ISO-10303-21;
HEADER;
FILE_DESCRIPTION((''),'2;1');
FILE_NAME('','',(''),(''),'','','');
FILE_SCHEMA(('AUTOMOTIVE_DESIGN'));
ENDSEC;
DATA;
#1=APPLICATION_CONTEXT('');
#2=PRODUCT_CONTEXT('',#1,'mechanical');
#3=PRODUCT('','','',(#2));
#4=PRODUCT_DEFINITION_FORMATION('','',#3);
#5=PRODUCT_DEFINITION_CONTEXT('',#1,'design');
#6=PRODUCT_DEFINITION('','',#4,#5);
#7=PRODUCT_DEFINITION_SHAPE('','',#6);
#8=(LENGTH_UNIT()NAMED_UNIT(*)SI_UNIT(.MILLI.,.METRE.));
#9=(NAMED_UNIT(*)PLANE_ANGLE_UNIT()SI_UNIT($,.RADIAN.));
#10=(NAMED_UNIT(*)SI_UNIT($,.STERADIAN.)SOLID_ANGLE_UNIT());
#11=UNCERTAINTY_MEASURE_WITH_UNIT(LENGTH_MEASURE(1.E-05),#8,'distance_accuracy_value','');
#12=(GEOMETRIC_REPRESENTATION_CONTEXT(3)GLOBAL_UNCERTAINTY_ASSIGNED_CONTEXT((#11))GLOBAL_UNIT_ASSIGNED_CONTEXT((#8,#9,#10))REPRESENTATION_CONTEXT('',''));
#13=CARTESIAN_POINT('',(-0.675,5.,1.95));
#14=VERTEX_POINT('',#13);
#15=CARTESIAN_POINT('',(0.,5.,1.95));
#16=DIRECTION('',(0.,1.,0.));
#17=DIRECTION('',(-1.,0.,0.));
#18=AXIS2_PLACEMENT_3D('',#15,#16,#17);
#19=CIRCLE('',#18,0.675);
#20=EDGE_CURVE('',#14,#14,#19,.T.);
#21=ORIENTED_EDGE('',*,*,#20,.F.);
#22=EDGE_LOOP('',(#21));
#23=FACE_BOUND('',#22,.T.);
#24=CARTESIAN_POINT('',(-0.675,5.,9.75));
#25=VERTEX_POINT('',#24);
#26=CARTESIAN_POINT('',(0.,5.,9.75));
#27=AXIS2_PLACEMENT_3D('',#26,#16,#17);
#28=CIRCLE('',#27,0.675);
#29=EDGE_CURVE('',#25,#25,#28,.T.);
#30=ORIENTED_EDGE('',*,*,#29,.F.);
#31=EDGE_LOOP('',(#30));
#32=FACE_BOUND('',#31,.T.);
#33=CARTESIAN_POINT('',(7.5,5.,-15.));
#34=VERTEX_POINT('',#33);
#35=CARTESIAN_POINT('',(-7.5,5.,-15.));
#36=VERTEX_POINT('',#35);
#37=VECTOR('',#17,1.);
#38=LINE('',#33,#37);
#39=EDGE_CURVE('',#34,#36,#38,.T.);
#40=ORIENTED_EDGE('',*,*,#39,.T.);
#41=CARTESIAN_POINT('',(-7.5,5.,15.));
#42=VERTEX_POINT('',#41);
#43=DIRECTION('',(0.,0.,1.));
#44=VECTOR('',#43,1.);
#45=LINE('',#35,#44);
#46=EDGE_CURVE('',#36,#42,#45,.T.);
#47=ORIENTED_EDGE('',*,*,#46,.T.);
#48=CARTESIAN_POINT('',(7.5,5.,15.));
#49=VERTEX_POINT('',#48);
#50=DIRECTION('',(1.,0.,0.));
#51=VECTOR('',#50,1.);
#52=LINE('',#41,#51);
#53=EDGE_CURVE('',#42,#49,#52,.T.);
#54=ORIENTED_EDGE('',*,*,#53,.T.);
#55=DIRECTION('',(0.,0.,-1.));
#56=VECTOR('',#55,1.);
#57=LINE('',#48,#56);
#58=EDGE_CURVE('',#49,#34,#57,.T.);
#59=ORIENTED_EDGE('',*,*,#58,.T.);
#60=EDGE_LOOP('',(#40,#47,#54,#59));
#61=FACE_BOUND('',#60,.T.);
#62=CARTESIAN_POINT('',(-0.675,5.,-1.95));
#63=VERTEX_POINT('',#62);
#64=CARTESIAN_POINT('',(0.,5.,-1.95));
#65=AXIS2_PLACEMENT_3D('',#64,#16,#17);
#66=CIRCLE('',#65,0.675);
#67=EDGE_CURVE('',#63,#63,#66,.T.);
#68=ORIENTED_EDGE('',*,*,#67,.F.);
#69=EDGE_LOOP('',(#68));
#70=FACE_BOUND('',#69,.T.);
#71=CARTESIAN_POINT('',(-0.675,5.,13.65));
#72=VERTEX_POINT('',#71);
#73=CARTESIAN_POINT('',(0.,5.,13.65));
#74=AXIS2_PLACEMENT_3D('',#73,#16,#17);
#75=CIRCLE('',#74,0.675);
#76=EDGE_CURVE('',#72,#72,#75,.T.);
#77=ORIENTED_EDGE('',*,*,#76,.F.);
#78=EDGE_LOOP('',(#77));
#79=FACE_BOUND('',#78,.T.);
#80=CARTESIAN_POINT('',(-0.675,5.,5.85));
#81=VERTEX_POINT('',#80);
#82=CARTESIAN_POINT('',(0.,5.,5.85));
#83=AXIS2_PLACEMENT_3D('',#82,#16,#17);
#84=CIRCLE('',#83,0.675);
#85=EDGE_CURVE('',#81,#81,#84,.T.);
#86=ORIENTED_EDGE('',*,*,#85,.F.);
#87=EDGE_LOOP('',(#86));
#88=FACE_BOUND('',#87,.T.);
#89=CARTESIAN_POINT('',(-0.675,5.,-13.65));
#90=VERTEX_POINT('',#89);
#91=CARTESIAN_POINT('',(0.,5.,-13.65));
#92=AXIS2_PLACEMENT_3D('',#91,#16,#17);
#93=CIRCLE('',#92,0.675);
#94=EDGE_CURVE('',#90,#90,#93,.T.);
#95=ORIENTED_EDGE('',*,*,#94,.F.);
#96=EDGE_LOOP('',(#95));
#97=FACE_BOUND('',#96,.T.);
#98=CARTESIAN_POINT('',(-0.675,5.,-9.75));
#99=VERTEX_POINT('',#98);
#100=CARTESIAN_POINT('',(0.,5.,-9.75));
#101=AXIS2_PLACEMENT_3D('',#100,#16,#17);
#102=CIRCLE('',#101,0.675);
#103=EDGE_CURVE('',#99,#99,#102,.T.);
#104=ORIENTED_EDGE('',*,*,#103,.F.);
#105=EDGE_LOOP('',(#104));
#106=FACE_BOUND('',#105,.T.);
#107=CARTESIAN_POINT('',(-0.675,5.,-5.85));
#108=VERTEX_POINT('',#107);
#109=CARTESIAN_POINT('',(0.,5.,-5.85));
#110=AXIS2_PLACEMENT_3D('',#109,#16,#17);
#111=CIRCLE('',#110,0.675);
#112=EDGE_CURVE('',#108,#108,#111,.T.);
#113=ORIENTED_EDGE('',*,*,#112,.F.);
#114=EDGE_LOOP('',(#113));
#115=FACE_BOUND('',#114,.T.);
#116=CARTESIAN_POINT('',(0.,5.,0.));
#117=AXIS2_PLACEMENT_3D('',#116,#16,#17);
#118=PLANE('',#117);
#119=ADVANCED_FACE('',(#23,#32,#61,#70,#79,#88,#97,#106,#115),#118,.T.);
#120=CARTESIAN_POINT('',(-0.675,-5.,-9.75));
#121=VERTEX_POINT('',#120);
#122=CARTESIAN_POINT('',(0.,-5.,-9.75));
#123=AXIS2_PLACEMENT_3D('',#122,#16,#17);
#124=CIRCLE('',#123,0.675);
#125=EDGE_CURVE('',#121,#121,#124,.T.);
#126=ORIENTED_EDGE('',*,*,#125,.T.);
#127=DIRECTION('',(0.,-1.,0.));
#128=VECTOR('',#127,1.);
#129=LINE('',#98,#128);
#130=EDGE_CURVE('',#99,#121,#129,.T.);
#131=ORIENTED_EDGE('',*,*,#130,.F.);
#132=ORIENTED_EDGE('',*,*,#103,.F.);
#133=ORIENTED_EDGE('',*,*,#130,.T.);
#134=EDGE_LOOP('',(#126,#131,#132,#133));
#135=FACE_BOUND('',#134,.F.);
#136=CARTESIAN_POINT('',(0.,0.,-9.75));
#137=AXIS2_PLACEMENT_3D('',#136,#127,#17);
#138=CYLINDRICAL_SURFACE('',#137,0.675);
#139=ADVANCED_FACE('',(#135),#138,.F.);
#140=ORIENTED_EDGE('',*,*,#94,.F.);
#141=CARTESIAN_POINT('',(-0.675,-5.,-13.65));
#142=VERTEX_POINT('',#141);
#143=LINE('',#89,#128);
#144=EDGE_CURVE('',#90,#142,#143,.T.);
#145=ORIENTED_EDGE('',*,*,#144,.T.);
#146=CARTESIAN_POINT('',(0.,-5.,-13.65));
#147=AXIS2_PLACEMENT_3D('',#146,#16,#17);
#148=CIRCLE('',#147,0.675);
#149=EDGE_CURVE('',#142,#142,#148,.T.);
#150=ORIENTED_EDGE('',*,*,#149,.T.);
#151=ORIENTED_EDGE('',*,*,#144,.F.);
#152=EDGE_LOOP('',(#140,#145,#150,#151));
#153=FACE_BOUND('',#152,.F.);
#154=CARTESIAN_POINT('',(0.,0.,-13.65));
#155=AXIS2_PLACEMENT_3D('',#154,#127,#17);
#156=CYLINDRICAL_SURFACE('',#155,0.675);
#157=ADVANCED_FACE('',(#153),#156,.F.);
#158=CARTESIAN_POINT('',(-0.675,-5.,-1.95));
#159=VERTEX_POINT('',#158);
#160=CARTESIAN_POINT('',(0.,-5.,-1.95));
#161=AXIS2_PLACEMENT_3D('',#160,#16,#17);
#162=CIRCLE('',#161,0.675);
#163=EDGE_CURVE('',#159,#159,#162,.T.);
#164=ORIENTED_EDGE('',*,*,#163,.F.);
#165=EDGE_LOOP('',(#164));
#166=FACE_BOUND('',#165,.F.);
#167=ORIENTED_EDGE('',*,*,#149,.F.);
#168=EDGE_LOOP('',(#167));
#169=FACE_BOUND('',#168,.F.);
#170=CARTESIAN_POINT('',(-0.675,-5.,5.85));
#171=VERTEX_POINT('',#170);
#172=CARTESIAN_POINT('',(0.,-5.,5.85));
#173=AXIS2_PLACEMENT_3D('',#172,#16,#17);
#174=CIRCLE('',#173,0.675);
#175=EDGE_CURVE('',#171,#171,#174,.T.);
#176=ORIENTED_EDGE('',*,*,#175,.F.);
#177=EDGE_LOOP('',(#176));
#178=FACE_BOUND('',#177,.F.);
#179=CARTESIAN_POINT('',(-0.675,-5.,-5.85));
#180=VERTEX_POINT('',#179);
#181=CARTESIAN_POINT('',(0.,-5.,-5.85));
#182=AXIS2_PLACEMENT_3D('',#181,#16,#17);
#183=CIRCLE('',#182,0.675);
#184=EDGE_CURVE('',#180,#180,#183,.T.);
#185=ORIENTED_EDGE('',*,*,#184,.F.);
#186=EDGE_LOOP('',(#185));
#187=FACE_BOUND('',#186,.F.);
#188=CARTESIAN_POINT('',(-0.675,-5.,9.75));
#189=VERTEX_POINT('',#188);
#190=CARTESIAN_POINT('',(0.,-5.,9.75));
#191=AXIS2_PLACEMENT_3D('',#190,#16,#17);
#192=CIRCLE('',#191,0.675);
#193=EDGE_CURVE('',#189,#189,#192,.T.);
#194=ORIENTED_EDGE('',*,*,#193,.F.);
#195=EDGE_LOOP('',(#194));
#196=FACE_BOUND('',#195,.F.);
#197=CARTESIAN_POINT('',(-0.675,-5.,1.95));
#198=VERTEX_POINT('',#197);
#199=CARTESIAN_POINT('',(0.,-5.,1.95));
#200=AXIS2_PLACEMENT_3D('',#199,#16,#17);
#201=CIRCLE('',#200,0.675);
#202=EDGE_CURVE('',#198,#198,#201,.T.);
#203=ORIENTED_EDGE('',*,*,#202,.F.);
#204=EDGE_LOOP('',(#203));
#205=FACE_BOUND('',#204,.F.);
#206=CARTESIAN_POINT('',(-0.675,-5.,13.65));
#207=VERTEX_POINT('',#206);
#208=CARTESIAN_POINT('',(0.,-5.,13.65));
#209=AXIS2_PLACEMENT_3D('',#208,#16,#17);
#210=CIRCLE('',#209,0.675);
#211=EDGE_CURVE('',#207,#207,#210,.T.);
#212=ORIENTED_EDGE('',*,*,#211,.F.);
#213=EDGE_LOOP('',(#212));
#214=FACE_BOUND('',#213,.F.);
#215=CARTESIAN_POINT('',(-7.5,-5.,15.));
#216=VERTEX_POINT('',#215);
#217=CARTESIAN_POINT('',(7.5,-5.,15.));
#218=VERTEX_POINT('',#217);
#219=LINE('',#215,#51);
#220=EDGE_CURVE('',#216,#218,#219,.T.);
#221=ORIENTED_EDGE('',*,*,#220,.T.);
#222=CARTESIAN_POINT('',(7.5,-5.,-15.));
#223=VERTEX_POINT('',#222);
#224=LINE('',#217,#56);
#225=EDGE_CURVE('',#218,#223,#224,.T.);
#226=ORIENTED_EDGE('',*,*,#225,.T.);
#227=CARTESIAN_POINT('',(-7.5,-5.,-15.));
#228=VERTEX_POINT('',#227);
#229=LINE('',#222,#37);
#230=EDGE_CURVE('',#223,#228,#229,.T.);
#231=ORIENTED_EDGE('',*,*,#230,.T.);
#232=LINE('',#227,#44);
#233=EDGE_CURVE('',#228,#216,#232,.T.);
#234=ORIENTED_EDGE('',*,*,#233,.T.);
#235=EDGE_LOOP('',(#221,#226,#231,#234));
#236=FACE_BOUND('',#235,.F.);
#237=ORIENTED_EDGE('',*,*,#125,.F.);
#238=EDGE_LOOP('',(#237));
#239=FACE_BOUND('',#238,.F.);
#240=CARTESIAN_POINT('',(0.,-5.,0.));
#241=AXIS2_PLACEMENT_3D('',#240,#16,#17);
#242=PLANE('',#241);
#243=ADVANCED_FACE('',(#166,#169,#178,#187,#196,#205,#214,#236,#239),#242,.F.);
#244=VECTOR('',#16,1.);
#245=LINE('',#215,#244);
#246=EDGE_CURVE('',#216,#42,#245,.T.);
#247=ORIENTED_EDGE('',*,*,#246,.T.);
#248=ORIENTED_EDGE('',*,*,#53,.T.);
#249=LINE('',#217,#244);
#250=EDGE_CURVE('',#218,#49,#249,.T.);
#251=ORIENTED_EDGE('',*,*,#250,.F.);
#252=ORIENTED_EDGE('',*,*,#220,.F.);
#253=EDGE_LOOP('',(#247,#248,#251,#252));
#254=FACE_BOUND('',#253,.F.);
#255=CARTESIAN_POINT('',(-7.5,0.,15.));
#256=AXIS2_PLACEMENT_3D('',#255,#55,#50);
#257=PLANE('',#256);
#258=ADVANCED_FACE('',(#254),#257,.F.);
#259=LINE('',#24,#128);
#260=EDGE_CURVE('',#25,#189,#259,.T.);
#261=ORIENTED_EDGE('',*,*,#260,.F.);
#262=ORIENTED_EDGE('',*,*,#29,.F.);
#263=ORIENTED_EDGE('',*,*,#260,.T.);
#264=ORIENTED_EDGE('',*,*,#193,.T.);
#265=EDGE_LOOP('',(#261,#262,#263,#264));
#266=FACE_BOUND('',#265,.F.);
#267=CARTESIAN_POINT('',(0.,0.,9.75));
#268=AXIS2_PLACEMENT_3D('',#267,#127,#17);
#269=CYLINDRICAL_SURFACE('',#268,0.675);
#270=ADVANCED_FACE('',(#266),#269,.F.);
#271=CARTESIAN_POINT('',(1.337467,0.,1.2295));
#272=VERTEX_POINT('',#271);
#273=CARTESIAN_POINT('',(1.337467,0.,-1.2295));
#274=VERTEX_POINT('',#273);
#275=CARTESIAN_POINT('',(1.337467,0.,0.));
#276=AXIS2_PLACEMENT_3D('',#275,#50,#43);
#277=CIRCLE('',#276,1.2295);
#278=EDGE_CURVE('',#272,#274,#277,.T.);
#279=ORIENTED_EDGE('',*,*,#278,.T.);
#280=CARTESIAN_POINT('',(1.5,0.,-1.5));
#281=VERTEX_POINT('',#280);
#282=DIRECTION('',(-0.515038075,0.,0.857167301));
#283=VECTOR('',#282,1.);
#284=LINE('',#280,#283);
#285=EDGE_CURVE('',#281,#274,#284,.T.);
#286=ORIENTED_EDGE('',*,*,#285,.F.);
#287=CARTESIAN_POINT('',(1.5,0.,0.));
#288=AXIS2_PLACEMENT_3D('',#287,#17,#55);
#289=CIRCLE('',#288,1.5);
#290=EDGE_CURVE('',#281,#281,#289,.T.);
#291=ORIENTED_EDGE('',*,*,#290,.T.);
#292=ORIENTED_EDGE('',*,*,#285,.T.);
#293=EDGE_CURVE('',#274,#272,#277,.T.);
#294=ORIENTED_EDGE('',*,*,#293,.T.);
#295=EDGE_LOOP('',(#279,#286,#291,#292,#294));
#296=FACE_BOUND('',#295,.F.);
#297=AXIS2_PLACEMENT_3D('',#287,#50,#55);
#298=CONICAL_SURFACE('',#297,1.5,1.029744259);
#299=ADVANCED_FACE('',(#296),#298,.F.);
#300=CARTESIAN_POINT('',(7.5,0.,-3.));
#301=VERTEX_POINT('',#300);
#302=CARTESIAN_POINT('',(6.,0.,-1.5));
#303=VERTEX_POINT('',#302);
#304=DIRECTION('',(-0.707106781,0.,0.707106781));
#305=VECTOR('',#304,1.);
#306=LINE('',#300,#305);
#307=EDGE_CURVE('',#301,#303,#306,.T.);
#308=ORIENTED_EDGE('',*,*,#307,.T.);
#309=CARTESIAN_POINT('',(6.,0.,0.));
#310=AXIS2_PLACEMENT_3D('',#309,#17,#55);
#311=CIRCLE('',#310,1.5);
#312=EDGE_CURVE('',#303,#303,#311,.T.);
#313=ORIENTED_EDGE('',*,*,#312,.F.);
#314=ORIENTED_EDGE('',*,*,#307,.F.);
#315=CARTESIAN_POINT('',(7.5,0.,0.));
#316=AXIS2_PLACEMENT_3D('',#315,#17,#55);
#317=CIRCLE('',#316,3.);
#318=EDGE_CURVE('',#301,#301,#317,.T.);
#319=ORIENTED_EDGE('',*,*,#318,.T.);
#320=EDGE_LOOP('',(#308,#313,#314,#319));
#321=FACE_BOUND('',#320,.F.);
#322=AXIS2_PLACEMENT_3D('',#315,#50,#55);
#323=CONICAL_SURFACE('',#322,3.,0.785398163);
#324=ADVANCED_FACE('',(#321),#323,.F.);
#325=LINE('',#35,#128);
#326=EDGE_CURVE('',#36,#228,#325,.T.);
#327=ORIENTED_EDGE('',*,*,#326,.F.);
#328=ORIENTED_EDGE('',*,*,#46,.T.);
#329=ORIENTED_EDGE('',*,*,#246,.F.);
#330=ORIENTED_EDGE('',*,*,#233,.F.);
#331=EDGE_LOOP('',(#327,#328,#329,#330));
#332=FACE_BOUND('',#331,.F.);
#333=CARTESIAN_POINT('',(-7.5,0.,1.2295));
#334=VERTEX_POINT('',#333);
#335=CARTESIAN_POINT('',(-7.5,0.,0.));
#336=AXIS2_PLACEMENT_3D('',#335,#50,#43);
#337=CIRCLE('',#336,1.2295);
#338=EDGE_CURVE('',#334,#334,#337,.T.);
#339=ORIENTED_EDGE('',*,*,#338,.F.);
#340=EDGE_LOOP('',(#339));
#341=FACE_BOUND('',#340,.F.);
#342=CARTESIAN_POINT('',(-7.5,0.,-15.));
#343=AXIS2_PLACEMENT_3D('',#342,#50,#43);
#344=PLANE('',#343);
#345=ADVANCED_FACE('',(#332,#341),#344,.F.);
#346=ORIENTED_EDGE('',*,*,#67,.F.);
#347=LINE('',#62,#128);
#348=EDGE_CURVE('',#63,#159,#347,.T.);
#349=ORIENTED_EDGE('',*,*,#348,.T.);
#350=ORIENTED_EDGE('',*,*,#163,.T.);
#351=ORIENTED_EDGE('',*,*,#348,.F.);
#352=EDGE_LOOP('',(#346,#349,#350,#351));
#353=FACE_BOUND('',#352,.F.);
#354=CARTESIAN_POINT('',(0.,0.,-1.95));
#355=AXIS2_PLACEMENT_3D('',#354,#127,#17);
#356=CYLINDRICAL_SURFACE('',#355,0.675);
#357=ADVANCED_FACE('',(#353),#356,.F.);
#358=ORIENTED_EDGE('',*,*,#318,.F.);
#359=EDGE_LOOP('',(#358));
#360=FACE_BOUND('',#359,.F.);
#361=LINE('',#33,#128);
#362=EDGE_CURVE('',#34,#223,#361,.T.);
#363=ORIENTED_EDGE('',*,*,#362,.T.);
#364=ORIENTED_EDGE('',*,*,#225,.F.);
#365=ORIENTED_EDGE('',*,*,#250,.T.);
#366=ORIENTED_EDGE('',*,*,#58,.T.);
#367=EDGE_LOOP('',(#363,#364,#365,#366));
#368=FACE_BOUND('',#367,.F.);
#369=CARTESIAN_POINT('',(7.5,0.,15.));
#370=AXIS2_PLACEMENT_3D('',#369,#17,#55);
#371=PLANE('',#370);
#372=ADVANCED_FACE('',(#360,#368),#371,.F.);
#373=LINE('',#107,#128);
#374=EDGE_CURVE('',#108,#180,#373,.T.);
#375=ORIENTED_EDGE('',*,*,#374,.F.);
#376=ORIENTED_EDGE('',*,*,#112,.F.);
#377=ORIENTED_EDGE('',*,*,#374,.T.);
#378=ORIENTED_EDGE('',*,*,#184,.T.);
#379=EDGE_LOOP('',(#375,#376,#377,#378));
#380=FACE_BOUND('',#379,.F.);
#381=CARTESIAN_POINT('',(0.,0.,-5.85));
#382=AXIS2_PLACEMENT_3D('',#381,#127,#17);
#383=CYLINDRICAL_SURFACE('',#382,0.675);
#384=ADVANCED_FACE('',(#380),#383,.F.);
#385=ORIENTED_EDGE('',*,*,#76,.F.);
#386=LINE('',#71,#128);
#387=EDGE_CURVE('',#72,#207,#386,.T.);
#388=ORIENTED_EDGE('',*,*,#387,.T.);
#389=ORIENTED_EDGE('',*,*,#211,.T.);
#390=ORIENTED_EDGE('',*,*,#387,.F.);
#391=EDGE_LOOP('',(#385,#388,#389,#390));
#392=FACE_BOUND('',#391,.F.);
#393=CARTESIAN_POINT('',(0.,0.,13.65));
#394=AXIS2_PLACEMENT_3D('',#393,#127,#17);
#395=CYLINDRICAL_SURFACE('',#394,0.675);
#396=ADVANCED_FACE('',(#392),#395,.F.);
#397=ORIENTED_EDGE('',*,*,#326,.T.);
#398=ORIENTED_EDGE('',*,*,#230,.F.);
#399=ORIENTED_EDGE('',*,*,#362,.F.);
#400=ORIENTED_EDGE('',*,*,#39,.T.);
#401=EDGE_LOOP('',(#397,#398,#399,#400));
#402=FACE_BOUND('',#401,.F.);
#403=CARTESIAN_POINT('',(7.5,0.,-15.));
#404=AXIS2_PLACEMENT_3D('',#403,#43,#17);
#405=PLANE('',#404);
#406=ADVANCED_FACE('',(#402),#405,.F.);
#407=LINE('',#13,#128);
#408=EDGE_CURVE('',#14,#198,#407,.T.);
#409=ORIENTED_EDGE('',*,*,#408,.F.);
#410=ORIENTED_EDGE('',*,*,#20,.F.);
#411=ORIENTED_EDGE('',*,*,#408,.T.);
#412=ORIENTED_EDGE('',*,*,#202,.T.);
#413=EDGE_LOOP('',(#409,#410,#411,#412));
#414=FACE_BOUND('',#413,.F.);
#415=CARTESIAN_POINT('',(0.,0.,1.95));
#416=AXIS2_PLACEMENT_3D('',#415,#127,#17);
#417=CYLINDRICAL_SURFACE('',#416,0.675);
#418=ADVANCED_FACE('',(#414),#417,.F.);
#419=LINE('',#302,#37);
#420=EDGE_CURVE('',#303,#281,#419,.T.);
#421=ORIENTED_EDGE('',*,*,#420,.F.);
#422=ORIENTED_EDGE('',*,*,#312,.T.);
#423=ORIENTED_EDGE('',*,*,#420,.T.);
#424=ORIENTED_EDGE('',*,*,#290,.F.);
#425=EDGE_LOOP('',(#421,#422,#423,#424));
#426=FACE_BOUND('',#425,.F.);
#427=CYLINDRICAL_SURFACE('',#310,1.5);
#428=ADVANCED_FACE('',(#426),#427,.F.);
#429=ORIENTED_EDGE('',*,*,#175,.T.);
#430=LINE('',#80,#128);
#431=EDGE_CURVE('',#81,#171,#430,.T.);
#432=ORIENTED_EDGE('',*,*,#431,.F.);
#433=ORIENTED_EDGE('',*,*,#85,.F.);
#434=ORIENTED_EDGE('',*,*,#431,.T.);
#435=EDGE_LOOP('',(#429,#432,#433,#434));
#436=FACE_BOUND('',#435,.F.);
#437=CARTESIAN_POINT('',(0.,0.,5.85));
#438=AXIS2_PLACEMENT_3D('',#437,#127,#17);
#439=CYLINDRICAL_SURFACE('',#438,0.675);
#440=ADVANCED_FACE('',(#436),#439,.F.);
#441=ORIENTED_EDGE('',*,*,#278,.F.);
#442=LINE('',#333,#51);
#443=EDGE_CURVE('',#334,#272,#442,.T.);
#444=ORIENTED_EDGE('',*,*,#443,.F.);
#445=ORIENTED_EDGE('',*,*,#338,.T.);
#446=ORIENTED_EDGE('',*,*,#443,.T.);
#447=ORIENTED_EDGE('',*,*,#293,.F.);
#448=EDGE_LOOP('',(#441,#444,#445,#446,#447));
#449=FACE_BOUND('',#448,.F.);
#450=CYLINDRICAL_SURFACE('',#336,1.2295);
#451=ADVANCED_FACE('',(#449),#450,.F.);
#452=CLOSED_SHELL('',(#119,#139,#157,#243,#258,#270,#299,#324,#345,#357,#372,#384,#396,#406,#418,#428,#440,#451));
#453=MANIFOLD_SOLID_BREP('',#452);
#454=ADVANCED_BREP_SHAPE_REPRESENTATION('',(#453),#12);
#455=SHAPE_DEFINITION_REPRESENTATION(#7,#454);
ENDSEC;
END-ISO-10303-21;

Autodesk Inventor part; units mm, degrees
ref_plane "YZ Plane" through (0, 0, 0) normal (1, 0, 0) x (0, 1, 0)
ref_plane "XZ Plane" through (0, 0, 0) normal (0, 1, 0) x (-1, 0, 0)
ref_plane "XY Plane" through (0, 0, 0) normal (0, 0, 1) x (1, 0, 0)
sketch "Sketch1" plane through (0, 0, 0) normal (0, 1, 0) x (-1, 0, 0)
  line L0 (7.5, 15) -> (-7.5, 15)
  line L1 (-7.5, 15) -> (-7.5, -15)
  line L2 (-7.5, -15) -> (7.5, -15)
  line L3 (7.5, -15) -> (7.5, 15)
  circle A0 centre (0, 13.65) radius 0.675
  circle A1 centre (0, 9.75) radius 0.675
  circle A2 centre (0, 5.85) radius 0.675
  circle A3 centre (0, 1.95) radius 0.675
  circle A4 centre (0, -1.95) radius 0.675
  circle A5 centre (0, -5.85) radius 0.675
  circle A6 centre (0, -9.75) radius 0.675
  circle A7 centre (0, -13.65) radius 0.675
  point P0 (0, 0)
  point P1 (7.5, 0)
  point P2 (0, 15)
  dimension "d0" = 15
  dimension "d1" = 30
  dimension "d2" = 1.35
  dimension "d3" = 1.35
  dimension "d6" = 3.9
  dimension "d27" = 1.35
extrude "Cuerpo" add sketch "Sketch1" along normal mid plane 10
sketch "Sketch2" plane through (7.5, -5, -15) normal (1, 0, 0) x (0, 0, -1)
  point P0 (-15, 5)
  point P1 (-15, 5)
hole "BCAM3" at (7.5, 0, 0) direction (-1, 0, 0) diameter 3 depth 6 tip angle 118 countersink diameter 6 countersink angle 90
sketch "Sketch3" plane through (-7.5, -5, 15) normal (-1, 0, 0) x (0, 0, 1)
  circle A0 centre (-15, 5) radius 3 projected
hole "M3X0.6" at (-7.5, 0, 0) direction (1, 0, 0) diameter 2.459 end through all thread size "M3x0.5" class "6H" standard "ANSI Metric M Profile"
properties part number "Prensa FO"
